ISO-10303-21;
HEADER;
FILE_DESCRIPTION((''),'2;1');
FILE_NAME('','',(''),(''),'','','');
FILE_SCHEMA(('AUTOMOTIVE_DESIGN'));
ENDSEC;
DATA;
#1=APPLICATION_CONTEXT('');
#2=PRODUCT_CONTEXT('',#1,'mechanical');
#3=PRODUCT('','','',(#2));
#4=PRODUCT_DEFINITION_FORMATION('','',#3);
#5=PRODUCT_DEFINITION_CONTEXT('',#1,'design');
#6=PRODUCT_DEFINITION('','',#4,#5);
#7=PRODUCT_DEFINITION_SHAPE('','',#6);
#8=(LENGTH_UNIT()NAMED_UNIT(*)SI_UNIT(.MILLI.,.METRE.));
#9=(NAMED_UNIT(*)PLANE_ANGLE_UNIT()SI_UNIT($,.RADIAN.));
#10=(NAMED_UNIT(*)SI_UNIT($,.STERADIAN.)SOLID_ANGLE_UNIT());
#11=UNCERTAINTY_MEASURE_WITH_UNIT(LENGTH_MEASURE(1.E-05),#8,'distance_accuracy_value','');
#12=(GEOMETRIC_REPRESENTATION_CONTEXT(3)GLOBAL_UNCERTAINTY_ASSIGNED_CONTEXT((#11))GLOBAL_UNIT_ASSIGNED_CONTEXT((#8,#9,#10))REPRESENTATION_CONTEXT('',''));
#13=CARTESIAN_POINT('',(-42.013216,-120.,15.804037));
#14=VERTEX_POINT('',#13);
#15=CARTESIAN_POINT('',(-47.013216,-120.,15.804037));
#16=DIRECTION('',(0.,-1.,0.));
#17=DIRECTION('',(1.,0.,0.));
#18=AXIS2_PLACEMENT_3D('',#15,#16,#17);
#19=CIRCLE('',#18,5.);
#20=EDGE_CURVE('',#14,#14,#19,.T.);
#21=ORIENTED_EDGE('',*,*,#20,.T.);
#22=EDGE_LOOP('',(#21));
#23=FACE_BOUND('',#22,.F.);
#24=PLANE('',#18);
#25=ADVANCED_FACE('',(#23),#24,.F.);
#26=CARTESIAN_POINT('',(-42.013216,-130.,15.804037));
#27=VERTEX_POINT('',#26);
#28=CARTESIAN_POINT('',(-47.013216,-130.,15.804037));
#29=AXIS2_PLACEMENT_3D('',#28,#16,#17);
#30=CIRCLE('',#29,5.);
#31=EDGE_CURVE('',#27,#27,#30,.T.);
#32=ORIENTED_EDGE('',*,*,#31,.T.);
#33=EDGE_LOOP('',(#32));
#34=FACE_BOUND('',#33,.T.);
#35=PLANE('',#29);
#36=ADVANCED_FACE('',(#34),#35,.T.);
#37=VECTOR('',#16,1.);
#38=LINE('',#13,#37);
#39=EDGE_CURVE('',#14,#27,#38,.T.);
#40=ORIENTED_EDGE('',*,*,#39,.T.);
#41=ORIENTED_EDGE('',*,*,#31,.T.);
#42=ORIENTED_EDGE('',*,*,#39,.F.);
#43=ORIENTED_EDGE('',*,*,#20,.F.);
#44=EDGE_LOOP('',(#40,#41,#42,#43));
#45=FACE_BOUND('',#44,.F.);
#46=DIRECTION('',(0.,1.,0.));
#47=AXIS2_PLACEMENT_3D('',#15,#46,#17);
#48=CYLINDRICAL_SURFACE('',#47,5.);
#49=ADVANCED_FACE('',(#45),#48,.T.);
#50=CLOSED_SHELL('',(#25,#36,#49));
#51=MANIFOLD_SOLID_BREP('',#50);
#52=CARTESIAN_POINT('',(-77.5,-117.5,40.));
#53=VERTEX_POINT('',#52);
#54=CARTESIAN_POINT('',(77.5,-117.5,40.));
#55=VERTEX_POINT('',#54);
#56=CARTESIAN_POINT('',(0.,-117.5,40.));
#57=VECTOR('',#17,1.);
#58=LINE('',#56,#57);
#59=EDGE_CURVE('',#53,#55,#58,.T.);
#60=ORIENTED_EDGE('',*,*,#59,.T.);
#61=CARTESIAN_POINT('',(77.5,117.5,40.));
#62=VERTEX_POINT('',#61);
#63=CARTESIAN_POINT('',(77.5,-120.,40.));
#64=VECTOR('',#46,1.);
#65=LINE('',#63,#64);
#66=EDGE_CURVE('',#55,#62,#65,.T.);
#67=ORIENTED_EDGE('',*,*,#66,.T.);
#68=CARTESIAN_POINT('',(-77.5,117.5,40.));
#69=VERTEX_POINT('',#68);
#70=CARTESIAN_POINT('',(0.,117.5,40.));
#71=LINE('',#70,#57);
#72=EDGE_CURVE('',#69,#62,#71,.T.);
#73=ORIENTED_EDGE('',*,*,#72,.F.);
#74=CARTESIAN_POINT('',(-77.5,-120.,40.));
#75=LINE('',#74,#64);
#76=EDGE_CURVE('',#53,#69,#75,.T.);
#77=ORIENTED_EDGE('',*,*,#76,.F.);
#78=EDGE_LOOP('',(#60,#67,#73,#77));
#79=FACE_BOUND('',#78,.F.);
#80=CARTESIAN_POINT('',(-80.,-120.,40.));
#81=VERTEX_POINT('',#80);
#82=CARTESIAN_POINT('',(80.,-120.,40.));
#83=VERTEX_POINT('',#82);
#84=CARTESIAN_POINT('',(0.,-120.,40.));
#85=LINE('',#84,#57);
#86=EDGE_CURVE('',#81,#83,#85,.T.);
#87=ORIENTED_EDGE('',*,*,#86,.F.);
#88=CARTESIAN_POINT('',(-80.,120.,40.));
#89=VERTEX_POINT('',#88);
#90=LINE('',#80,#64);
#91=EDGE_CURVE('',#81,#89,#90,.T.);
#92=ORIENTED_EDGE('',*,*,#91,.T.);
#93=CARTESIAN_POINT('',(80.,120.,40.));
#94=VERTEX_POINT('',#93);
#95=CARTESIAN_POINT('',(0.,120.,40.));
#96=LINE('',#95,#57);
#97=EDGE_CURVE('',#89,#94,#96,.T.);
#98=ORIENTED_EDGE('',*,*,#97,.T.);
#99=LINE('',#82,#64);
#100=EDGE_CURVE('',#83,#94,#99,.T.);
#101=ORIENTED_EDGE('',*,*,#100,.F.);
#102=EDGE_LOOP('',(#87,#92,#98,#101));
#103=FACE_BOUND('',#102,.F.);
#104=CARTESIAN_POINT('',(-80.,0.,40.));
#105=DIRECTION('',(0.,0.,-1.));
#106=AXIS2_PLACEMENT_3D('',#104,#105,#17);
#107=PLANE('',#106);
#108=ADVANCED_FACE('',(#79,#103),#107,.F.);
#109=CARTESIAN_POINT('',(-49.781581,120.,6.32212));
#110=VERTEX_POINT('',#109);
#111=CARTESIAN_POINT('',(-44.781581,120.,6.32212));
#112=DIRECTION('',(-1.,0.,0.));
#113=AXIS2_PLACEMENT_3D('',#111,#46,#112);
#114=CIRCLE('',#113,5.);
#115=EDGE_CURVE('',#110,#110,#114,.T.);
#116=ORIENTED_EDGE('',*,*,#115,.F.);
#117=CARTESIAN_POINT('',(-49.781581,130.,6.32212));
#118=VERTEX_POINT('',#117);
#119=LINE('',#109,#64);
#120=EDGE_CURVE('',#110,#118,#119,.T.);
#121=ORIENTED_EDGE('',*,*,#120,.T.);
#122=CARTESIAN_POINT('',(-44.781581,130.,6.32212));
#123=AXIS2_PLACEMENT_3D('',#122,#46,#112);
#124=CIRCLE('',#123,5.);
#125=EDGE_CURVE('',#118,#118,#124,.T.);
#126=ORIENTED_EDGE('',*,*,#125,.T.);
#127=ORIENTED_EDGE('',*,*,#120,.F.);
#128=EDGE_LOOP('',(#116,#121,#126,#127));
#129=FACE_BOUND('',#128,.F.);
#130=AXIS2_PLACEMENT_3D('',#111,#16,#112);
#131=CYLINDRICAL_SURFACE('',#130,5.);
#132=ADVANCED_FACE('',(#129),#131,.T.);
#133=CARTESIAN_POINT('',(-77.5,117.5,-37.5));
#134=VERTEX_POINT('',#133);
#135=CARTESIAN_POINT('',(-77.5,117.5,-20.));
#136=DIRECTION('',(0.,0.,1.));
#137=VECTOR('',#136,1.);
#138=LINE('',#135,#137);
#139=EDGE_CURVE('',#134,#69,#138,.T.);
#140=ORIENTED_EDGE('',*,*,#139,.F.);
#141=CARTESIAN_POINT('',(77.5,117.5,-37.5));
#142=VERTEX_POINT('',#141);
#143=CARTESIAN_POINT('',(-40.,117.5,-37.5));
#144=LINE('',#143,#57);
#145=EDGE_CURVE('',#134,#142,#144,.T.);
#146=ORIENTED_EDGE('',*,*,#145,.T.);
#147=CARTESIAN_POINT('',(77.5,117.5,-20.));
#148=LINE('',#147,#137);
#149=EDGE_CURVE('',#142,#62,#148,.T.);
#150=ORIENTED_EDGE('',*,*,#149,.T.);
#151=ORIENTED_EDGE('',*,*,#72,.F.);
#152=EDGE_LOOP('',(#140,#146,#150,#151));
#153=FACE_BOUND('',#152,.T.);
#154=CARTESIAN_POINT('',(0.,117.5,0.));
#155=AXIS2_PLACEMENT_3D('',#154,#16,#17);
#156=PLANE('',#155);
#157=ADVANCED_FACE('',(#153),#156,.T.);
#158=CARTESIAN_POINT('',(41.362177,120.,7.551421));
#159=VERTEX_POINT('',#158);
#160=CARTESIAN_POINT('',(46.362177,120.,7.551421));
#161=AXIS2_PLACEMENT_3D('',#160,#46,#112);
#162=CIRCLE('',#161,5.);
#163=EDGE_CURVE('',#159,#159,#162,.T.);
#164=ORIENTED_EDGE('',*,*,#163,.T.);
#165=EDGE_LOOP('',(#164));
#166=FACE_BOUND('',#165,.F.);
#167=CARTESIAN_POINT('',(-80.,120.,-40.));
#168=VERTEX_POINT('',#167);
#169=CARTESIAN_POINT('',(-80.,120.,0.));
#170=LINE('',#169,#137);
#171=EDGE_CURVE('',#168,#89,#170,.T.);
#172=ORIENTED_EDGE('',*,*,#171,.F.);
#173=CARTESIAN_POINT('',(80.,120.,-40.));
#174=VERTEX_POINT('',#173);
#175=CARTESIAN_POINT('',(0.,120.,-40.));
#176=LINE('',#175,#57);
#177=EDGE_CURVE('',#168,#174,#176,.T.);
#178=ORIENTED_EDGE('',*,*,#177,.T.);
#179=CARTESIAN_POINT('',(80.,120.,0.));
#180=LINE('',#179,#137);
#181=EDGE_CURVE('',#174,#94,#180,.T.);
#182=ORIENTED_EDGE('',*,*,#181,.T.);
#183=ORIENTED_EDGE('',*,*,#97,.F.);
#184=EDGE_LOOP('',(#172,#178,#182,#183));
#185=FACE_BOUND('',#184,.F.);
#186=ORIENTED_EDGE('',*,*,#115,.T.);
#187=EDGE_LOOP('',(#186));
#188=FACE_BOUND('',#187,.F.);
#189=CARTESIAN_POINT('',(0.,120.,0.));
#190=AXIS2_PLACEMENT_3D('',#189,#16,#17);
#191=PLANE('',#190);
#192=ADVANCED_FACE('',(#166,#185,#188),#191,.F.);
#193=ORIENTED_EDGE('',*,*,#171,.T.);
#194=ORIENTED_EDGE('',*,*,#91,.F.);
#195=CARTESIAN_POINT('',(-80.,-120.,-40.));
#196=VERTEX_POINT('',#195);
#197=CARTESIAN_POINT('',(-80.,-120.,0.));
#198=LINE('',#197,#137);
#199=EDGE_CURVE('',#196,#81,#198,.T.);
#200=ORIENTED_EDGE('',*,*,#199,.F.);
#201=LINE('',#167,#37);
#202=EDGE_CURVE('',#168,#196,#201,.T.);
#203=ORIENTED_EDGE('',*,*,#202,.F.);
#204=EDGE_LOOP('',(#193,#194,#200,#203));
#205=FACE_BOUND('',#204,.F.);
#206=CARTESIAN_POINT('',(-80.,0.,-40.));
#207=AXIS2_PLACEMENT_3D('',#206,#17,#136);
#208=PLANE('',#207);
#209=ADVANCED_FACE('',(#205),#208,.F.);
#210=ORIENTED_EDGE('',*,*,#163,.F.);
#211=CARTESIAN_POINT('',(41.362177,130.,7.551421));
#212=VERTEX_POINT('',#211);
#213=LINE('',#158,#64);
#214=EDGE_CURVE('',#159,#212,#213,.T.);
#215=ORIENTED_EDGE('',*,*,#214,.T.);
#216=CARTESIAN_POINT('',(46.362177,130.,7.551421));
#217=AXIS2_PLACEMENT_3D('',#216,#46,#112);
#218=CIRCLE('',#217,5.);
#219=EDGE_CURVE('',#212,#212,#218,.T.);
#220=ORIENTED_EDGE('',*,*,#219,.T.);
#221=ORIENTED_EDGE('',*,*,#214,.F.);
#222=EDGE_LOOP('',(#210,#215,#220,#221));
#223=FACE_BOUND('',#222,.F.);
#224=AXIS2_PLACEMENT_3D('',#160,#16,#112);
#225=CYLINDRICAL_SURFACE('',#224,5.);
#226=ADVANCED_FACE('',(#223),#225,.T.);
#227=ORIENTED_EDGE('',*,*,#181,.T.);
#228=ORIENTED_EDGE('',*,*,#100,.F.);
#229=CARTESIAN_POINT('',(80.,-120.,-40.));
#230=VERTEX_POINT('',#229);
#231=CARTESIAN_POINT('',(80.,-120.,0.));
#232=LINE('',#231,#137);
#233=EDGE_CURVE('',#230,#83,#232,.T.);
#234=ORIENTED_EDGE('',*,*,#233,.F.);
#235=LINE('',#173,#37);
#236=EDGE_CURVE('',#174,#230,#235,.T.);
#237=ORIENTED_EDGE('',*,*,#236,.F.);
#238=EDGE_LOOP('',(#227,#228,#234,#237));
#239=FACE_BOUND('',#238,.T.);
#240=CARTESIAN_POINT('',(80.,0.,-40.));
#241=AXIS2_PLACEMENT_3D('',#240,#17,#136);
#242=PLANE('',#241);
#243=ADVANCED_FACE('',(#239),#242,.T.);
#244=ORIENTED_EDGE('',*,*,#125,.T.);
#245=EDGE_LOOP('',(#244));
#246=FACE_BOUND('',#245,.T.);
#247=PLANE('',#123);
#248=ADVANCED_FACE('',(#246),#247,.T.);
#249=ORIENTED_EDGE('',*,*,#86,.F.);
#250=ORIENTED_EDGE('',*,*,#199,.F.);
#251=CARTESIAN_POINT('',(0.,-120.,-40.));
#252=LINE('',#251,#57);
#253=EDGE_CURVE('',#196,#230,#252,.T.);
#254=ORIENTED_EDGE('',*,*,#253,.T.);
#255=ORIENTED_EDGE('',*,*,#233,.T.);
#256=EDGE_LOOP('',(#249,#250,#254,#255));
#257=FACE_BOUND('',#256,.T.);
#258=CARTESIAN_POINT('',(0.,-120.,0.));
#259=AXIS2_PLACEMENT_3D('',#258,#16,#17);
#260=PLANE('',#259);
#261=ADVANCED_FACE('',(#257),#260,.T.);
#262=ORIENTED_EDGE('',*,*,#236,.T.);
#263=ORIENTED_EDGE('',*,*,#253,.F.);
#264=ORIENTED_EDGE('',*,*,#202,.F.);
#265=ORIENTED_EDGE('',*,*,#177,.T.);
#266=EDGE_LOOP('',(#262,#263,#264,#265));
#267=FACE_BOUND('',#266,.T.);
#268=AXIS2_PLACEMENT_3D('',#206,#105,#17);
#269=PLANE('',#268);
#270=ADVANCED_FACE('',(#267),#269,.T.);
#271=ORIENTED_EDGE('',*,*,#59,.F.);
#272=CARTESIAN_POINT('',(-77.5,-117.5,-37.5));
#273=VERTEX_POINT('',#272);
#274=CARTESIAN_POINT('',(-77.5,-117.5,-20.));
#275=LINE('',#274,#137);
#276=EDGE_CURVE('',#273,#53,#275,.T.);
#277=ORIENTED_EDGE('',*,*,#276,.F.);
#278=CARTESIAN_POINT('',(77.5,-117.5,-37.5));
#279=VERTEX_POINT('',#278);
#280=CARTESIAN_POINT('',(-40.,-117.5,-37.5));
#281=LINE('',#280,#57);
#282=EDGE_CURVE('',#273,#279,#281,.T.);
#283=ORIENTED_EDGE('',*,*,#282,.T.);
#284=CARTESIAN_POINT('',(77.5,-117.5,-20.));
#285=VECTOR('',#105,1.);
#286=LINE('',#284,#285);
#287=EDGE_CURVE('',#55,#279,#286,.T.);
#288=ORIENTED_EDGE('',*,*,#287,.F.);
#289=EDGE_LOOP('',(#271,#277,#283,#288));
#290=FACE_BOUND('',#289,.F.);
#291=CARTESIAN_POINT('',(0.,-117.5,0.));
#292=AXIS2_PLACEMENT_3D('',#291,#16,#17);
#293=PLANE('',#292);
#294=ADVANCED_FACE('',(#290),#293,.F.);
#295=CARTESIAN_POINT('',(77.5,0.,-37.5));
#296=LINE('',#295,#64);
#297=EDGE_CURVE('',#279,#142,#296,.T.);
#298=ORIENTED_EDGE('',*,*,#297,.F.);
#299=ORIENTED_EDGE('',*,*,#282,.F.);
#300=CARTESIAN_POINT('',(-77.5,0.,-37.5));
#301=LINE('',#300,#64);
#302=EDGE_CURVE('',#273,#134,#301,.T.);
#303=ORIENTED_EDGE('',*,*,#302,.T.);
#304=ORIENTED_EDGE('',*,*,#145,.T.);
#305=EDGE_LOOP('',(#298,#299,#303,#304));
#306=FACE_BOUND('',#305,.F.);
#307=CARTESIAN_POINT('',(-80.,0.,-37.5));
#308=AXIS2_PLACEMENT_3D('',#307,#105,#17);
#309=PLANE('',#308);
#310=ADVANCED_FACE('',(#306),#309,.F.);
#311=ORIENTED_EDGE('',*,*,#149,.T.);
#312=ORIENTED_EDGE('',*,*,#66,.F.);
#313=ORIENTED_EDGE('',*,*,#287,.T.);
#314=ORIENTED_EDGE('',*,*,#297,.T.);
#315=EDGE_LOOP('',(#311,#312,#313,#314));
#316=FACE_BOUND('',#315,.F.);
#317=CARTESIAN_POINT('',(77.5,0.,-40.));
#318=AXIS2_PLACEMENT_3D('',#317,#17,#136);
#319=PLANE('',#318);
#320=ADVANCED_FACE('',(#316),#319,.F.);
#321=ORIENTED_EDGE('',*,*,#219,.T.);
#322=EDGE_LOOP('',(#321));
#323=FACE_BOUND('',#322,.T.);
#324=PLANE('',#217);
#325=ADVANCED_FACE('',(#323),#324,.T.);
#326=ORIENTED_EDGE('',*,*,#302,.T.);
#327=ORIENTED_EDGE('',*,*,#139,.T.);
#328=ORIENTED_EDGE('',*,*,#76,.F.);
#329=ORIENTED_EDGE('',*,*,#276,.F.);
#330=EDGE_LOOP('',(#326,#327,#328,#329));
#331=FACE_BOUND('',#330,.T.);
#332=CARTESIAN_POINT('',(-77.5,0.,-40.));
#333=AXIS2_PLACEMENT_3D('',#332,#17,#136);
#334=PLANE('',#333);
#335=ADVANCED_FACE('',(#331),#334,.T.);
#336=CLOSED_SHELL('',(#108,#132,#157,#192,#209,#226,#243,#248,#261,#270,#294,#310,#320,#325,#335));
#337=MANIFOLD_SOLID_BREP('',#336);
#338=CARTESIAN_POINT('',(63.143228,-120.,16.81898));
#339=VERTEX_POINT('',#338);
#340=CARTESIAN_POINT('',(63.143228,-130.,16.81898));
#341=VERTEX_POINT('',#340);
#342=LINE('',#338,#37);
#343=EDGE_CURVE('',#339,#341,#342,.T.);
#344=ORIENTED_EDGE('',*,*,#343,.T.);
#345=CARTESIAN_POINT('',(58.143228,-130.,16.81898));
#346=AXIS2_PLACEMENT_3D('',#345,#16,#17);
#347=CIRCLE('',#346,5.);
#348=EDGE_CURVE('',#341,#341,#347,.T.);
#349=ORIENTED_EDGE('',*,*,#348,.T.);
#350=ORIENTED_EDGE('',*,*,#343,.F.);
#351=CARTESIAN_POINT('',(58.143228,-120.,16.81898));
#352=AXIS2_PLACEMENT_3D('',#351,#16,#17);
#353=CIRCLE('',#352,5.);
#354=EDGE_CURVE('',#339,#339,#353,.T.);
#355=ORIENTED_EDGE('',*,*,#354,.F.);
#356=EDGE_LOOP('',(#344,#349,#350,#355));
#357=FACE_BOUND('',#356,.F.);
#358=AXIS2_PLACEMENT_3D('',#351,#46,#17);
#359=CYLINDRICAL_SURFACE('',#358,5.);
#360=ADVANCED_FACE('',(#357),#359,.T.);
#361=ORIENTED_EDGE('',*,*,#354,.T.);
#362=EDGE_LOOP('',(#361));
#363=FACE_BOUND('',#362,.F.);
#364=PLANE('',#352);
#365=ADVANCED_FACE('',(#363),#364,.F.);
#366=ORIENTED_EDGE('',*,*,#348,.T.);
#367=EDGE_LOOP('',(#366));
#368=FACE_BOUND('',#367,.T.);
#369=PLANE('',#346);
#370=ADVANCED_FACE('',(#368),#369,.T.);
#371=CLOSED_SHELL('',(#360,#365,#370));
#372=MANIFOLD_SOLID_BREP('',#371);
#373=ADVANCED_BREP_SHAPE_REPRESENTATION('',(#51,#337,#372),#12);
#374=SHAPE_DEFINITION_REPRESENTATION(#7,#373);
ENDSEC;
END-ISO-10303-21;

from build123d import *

# Parameters (mm, degrees)
F1_W      = 160
F1_H      = 80
F2_DEPTH  = 120
F5_T      = -2.5
F7_R      = 5
F9_DEPTH  = 10
F11_R     = 5
F12_DEPTH = 10


# Not quite as in the source:
# - the program builds the solid bodies; features that only make, move or delete a surface that nothing else refers to are left out


with BuildPart() as f2:
    # F1 (on face) → F2 (new body, symmetric)
    with BuildSketch(Plane.XZ):
        Rectangle(F1_W, F1_H)
    extrude(amount=F2_DEPTH, both=True)

    # F5
    f5_openings = [f2.faces().sort_by_distance(p)[0] for p in [
        (0, 0, 40),
    ]]
    offset(amount=F5_T, openings=f5_openings)

    # F11 (on face) → F12 (join)
    with BuildSketch(Plane(origin=(0, 120, 0), x_dir=(-1, 0, 0), z_dir=(0, 1, 0))):
        with Locations((-46.3621765375, 7.5514214113)):
            Circle(F11_R)
        with Locations((44.7815805674, 6.3221203163)):
            Circle(F11_R)
    extrude(amount=F12_DEPTH)


with BuildPart() as f9:
    # F7 (on face) → F9 (new body)
    with BuildSketch(Plane.XZ.offset(120)):
        with Locations((-47.0132157207, 15.8040374517)):
            Circle(F7_R)
    extrude(amount=F9_DEPTH)


with BuildPart() as f9b:
    # F7 (on face) → F9, piece 2 (new body)
    with BuildSketch(Plane.XZ.offset(120)):
        with Locations((58.1432282925, 16.818979755)):
            Circle(F7_R)
    extrude(amount=F9_DEPTH)


solid = Compound([f2.part, f9.part, f9b.part])
